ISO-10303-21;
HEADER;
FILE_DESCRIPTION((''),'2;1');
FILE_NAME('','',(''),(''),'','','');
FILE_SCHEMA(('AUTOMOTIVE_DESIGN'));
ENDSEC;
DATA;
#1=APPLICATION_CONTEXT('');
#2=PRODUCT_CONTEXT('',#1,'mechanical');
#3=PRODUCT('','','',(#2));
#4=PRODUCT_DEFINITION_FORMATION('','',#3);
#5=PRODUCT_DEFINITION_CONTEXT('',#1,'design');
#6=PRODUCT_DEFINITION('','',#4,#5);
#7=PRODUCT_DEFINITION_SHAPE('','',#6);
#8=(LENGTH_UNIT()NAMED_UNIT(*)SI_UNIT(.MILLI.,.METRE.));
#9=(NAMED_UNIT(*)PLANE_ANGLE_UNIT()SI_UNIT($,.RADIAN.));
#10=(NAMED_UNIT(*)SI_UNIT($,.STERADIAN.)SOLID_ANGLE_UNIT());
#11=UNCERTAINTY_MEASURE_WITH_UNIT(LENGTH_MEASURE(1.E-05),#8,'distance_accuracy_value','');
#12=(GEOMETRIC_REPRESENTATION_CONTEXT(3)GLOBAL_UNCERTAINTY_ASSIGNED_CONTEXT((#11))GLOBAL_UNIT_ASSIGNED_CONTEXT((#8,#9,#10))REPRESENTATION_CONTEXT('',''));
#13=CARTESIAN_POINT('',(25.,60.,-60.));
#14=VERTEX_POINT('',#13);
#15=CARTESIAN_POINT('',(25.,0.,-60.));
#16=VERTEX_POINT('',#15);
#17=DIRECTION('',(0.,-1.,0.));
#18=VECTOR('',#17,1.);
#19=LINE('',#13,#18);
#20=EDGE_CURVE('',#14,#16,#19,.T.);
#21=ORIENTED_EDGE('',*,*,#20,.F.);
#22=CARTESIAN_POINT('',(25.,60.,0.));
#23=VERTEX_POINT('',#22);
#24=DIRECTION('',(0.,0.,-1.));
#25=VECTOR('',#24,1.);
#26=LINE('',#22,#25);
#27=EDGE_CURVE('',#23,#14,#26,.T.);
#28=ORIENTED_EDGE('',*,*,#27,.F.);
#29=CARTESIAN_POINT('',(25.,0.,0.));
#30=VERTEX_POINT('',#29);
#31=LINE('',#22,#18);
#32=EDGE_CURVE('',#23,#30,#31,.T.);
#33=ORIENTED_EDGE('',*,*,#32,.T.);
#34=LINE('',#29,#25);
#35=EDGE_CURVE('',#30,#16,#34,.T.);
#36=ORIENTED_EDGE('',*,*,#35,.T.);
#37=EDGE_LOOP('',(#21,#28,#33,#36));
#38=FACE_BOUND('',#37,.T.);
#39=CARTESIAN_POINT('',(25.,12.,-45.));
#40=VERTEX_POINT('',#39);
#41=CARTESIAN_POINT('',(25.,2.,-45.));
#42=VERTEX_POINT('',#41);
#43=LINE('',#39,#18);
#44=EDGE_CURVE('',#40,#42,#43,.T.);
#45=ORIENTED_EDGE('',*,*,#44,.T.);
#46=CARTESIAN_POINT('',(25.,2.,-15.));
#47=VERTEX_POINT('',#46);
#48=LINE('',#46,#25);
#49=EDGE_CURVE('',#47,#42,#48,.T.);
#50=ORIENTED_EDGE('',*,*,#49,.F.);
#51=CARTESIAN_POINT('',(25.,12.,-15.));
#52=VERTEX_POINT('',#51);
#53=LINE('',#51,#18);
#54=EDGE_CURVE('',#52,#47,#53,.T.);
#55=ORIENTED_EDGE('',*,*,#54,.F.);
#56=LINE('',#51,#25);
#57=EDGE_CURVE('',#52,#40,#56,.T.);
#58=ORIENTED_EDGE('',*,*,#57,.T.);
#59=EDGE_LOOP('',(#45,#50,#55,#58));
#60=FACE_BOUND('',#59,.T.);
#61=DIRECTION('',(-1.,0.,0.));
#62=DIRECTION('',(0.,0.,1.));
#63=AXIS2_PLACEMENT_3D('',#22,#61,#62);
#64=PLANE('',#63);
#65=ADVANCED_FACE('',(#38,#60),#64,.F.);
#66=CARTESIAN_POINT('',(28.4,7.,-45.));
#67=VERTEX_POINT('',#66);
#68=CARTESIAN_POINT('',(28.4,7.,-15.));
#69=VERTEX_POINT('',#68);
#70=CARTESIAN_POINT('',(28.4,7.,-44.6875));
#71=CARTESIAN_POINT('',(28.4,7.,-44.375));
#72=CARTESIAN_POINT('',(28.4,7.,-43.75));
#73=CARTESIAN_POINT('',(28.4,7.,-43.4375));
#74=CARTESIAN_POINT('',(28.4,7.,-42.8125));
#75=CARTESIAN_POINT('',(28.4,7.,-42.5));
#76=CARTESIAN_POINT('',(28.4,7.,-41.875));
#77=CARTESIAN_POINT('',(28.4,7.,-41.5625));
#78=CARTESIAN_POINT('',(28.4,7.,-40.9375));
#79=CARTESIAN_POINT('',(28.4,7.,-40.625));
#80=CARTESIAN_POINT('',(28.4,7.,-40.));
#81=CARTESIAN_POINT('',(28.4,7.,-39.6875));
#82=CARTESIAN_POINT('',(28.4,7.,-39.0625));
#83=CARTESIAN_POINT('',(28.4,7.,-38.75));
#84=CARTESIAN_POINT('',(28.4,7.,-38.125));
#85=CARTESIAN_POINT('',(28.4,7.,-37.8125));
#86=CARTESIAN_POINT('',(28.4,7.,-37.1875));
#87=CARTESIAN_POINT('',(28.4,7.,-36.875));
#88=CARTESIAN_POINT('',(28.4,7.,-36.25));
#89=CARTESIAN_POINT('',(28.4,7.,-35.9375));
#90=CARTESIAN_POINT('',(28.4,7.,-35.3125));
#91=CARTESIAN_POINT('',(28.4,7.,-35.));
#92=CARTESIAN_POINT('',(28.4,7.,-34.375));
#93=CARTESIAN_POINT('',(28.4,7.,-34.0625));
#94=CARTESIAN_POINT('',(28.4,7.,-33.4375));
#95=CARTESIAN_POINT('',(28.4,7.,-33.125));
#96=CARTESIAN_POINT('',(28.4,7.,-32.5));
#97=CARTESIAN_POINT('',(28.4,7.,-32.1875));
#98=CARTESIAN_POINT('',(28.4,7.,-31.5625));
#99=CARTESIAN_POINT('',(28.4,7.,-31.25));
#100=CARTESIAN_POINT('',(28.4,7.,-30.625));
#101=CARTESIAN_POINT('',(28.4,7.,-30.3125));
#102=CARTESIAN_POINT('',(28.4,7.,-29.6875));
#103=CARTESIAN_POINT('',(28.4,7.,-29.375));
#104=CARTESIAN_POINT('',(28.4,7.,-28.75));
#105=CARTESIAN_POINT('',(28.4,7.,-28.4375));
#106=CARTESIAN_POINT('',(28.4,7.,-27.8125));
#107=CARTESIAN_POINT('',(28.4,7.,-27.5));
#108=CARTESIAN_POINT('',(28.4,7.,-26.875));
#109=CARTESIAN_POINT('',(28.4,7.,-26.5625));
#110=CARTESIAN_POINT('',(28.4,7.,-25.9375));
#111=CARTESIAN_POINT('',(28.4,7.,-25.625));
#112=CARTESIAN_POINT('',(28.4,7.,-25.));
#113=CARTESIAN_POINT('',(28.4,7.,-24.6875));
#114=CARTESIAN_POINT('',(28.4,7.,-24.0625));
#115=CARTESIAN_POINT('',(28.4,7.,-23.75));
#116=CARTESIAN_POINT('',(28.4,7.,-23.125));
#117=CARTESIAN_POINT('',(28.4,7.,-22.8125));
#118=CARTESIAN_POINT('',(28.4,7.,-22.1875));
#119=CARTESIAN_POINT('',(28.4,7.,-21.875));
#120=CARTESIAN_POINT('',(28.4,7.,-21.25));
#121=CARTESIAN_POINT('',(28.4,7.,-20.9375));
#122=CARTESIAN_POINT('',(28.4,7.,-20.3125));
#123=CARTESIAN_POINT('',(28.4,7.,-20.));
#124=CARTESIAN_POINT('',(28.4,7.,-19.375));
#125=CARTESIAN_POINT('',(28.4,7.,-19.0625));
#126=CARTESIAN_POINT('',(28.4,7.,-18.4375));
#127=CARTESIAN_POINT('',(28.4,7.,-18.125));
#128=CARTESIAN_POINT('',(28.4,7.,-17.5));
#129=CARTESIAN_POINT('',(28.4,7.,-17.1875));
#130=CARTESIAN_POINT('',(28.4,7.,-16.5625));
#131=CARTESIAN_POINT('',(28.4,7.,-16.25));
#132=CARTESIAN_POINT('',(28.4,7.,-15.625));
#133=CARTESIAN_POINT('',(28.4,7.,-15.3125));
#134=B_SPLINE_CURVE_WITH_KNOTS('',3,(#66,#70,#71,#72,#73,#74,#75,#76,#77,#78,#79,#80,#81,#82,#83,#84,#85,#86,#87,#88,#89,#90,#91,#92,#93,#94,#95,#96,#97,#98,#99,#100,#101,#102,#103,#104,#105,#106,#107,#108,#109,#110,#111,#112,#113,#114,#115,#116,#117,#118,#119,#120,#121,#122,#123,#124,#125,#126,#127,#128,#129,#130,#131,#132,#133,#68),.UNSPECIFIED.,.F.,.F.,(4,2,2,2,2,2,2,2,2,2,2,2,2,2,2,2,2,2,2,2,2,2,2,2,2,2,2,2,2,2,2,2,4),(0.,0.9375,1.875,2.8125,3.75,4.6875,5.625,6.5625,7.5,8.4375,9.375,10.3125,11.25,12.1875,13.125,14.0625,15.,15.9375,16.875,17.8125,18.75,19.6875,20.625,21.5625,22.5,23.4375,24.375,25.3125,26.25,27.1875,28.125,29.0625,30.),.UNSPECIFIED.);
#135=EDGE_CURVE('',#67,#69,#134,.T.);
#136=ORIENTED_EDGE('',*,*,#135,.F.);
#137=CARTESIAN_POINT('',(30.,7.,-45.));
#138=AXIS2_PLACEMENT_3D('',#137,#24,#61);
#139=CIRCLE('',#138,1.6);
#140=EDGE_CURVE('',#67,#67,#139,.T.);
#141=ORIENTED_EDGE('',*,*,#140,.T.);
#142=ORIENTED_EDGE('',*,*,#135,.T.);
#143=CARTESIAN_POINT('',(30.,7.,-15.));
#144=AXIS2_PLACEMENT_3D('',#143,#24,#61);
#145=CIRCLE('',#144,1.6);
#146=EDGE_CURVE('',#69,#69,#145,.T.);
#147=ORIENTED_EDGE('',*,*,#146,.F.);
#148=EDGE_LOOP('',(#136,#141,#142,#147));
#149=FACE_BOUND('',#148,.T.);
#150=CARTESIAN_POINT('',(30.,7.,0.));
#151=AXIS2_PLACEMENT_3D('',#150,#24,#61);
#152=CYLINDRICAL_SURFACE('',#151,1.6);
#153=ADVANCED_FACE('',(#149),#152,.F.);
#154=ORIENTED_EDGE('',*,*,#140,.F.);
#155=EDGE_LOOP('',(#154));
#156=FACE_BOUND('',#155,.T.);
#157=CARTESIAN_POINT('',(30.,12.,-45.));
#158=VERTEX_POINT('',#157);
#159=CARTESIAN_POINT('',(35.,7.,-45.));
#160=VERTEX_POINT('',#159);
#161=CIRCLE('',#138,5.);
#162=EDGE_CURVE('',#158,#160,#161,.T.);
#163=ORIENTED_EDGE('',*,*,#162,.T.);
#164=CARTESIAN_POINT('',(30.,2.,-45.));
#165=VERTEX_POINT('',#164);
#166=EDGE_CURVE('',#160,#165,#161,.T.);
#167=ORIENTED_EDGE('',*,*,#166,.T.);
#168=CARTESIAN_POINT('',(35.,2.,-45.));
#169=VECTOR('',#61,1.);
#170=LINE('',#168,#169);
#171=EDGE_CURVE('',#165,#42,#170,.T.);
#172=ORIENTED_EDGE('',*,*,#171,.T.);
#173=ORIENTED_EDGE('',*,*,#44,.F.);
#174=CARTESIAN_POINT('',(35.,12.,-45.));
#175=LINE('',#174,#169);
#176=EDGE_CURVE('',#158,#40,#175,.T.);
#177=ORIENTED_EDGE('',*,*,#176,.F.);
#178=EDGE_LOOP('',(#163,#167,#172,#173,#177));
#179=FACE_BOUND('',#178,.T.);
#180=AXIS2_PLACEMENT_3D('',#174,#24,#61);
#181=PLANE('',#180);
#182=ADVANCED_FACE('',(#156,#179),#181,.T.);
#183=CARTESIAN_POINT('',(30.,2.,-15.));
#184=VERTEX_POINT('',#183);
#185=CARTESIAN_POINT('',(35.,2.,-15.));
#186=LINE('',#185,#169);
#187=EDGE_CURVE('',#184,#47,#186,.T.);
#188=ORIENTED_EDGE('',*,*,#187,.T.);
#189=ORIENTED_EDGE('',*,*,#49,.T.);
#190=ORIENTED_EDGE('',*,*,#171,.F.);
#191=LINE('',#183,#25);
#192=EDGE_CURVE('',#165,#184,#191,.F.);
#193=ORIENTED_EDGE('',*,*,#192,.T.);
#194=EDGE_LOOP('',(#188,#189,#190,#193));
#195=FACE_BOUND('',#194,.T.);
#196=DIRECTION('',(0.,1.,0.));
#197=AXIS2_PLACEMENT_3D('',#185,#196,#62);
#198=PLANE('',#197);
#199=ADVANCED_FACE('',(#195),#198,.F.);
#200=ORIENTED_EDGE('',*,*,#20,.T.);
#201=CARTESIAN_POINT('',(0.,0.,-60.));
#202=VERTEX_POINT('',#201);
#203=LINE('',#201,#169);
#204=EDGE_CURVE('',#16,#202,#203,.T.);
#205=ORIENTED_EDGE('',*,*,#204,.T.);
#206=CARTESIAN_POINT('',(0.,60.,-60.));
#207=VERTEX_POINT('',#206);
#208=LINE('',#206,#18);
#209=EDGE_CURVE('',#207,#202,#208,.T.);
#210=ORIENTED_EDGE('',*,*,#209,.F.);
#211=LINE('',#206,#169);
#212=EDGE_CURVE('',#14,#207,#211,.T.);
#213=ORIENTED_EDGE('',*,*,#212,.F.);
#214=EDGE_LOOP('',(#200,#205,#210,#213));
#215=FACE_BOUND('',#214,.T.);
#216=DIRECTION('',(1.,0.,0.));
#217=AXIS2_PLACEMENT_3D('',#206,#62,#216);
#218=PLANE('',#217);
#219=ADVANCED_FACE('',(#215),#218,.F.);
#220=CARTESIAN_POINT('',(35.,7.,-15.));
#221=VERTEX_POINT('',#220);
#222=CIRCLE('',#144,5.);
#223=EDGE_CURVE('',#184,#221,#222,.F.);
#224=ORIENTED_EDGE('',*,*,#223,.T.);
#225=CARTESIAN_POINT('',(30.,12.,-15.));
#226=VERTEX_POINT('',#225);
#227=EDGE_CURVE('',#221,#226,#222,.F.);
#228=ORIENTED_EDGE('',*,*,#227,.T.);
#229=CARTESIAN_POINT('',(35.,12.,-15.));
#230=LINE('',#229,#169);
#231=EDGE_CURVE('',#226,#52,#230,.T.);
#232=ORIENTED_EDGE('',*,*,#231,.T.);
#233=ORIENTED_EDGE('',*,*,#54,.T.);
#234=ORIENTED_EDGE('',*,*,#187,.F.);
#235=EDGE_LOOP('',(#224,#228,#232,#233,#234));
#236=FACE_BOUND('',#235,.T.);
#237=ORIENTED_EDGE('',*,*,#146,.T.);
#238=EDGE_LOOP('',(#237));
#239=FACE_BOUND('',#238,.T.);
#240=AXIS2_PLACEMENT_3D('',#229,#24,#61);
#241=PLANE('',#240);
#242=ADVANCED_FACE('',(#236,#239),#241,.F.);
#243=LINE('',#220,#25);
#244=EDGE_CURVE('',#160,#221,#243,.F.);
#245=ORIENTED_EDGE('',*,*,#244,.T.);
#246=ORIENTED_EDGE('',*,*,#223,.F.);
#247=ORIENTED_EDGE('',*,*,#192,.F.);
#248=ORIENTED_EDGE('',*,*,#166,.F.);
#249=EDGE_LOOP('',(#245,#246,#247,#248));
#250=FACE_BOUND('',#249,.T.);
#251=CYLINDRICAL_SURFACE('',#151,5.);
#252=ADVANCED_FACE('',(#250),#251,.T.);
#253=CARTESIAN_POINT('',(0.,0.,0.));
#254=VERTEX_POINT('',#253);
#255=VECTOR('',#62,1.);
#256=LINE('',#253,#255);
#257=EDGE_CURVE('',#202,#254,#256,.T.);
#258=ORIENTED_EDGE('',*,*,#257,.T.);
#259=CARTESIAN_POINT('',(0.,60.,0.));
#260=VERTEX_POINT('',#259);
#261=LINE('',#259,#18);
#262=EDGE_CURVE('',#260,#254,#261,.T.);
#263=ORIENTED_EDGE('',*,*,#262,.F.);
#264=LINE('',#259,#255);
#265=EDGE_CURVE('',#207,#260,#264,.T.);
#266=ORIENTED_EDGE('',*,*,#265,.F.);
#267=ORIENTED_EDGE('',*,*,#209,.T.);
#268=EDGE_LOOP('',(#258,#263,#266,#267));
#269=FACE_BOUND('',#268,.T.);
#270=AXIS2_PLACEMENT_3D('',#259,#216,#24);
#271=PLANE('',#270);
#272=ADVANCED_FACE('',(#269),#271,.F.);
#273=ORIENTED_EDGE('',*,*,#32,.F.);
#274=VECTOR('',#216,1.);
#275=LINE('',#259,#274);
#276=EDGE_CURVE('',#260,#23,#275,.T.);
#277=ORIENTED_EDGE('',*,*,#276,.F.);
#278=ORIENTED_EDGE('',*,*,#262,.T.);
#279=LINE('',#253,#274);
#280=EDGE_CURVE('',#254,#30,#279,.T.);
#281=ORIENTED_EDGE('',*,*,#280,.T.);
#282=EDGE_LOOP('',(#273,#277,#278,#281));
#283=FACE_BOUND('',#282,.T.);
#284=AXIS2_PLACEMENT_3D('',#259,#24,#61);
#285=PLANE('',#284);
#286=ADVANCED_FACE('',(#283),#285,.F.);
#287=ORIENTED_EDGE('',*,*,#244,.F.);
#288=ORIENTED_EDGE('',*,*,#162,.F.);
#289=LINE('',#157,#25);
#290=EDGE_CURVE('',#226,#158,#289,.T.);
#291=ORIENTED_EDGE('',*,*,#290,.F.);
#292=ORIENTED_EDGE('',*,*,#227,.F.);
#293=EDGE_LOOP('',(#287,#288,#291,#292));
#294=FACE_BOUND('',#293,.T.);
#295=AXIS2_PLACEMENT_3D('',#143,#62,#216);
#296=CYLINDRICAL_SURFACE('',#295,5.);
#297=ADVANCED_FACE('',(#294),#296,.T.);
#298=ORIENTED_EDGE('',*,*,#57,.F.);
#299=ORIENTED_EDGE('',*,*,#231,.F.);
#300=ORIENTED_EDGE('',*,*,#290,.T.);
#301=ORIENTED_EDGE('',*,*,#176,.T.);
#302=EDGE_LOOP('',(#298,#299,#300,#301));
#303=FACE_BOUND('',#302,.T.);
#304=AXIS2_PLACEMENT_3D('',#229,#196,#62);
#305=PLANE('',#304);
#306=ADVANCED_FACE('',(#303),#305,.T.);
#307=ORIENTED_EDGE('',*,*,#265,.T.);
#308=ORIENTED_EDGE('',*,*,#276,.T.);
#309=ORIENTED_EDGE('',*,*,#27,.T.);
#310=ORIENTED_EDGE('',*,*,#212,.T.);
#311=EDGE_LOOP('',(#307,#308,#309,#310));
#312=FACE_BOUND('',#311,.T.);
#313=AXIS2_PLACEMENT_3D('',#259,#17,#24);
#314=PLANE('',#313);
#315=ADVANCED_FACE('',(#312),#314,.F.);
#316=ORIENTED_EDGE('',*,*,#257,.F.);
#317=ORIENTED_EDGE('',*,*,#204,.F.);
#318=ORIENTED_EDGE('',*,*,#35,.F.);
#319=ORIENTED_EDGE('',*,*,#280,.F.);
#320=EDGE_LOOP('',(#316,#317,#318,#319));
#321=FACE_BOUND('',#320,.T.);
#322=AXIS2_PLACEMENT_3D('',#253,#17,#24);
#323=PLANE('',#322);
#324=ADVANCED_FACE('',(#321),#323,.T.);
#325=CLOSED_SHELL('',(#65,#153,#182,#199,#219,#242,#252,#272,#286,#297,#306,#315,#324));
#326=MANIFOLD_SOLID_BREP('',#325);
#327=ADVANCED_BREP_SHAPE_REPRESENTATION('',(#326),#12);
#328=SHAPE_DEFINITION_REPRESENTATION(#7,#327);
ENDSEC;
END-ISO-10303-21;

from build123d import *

# Parameters (mm, degrees)
SKETCH1_W           = 25
SKETCH1_H           = 60
BOSS_EXTRUDE1_DEPTH = 60
SKETCH2_W           = 30
SKETCH2_H           = 10
BOSS_EXTRUDE2_DEPTH = 10
SKETCH3_R           = 1.6
CUT_EXTRUDE1_DEPTH  = 83.764726786
FILLET3_R           = 5


with BuildPart() as part:
    # Sketch1 → Boss-Extrude1 (new body)
    with BuildSketch(Plane(origin=(0, 0, 0), x_dir=(1, 0, 0), z_dir=(0, 1, 0))):
        with Locations((12.5, 30)):
            Rectangle(SKETCH1_W, SKETCH1_H)
    extrude(amount=BOSS_EXTRUDE1_DEPTH)

    # Sketch2 → Boss-Extrude2 (add)
    with BuildSketch(Plane(origin=(25, 0, 0), x_dir=(0, 0, -1), z_dir=(1, 0, 0))):
        with Locations((30, 7)):
            Rectangle(SKETCH2_W, SKETCH2_H)
    extrude(amount=BOSS_EXTRUDE2_DEPTH)

    # Sketch3 → Cut-Extrude1 (cut, through all)
    with BuildSketch(Plane(origin=(0, 0, -45), x_dir=(-1, 0, 0), z_dir=(0, 0, -1))):
        with Locations((-30, 7)):
            Circle(SKETCH3_R)
    extrude(amount=-CUT_EXTRUDE1_DEPTH, mode=Mode.SUBTRACT)

    # Fillet3
    fillet3_edges = [part.edges().sort_by_distance(p)[0] for p in [
        (35, 2, -30),
        (35, 12, -30),
    ]]
    fillet(fillet3_edges, radius=FILLET3_R - 0.0001)  # a hair under: the kernel refuses the full size


solid = part.part
